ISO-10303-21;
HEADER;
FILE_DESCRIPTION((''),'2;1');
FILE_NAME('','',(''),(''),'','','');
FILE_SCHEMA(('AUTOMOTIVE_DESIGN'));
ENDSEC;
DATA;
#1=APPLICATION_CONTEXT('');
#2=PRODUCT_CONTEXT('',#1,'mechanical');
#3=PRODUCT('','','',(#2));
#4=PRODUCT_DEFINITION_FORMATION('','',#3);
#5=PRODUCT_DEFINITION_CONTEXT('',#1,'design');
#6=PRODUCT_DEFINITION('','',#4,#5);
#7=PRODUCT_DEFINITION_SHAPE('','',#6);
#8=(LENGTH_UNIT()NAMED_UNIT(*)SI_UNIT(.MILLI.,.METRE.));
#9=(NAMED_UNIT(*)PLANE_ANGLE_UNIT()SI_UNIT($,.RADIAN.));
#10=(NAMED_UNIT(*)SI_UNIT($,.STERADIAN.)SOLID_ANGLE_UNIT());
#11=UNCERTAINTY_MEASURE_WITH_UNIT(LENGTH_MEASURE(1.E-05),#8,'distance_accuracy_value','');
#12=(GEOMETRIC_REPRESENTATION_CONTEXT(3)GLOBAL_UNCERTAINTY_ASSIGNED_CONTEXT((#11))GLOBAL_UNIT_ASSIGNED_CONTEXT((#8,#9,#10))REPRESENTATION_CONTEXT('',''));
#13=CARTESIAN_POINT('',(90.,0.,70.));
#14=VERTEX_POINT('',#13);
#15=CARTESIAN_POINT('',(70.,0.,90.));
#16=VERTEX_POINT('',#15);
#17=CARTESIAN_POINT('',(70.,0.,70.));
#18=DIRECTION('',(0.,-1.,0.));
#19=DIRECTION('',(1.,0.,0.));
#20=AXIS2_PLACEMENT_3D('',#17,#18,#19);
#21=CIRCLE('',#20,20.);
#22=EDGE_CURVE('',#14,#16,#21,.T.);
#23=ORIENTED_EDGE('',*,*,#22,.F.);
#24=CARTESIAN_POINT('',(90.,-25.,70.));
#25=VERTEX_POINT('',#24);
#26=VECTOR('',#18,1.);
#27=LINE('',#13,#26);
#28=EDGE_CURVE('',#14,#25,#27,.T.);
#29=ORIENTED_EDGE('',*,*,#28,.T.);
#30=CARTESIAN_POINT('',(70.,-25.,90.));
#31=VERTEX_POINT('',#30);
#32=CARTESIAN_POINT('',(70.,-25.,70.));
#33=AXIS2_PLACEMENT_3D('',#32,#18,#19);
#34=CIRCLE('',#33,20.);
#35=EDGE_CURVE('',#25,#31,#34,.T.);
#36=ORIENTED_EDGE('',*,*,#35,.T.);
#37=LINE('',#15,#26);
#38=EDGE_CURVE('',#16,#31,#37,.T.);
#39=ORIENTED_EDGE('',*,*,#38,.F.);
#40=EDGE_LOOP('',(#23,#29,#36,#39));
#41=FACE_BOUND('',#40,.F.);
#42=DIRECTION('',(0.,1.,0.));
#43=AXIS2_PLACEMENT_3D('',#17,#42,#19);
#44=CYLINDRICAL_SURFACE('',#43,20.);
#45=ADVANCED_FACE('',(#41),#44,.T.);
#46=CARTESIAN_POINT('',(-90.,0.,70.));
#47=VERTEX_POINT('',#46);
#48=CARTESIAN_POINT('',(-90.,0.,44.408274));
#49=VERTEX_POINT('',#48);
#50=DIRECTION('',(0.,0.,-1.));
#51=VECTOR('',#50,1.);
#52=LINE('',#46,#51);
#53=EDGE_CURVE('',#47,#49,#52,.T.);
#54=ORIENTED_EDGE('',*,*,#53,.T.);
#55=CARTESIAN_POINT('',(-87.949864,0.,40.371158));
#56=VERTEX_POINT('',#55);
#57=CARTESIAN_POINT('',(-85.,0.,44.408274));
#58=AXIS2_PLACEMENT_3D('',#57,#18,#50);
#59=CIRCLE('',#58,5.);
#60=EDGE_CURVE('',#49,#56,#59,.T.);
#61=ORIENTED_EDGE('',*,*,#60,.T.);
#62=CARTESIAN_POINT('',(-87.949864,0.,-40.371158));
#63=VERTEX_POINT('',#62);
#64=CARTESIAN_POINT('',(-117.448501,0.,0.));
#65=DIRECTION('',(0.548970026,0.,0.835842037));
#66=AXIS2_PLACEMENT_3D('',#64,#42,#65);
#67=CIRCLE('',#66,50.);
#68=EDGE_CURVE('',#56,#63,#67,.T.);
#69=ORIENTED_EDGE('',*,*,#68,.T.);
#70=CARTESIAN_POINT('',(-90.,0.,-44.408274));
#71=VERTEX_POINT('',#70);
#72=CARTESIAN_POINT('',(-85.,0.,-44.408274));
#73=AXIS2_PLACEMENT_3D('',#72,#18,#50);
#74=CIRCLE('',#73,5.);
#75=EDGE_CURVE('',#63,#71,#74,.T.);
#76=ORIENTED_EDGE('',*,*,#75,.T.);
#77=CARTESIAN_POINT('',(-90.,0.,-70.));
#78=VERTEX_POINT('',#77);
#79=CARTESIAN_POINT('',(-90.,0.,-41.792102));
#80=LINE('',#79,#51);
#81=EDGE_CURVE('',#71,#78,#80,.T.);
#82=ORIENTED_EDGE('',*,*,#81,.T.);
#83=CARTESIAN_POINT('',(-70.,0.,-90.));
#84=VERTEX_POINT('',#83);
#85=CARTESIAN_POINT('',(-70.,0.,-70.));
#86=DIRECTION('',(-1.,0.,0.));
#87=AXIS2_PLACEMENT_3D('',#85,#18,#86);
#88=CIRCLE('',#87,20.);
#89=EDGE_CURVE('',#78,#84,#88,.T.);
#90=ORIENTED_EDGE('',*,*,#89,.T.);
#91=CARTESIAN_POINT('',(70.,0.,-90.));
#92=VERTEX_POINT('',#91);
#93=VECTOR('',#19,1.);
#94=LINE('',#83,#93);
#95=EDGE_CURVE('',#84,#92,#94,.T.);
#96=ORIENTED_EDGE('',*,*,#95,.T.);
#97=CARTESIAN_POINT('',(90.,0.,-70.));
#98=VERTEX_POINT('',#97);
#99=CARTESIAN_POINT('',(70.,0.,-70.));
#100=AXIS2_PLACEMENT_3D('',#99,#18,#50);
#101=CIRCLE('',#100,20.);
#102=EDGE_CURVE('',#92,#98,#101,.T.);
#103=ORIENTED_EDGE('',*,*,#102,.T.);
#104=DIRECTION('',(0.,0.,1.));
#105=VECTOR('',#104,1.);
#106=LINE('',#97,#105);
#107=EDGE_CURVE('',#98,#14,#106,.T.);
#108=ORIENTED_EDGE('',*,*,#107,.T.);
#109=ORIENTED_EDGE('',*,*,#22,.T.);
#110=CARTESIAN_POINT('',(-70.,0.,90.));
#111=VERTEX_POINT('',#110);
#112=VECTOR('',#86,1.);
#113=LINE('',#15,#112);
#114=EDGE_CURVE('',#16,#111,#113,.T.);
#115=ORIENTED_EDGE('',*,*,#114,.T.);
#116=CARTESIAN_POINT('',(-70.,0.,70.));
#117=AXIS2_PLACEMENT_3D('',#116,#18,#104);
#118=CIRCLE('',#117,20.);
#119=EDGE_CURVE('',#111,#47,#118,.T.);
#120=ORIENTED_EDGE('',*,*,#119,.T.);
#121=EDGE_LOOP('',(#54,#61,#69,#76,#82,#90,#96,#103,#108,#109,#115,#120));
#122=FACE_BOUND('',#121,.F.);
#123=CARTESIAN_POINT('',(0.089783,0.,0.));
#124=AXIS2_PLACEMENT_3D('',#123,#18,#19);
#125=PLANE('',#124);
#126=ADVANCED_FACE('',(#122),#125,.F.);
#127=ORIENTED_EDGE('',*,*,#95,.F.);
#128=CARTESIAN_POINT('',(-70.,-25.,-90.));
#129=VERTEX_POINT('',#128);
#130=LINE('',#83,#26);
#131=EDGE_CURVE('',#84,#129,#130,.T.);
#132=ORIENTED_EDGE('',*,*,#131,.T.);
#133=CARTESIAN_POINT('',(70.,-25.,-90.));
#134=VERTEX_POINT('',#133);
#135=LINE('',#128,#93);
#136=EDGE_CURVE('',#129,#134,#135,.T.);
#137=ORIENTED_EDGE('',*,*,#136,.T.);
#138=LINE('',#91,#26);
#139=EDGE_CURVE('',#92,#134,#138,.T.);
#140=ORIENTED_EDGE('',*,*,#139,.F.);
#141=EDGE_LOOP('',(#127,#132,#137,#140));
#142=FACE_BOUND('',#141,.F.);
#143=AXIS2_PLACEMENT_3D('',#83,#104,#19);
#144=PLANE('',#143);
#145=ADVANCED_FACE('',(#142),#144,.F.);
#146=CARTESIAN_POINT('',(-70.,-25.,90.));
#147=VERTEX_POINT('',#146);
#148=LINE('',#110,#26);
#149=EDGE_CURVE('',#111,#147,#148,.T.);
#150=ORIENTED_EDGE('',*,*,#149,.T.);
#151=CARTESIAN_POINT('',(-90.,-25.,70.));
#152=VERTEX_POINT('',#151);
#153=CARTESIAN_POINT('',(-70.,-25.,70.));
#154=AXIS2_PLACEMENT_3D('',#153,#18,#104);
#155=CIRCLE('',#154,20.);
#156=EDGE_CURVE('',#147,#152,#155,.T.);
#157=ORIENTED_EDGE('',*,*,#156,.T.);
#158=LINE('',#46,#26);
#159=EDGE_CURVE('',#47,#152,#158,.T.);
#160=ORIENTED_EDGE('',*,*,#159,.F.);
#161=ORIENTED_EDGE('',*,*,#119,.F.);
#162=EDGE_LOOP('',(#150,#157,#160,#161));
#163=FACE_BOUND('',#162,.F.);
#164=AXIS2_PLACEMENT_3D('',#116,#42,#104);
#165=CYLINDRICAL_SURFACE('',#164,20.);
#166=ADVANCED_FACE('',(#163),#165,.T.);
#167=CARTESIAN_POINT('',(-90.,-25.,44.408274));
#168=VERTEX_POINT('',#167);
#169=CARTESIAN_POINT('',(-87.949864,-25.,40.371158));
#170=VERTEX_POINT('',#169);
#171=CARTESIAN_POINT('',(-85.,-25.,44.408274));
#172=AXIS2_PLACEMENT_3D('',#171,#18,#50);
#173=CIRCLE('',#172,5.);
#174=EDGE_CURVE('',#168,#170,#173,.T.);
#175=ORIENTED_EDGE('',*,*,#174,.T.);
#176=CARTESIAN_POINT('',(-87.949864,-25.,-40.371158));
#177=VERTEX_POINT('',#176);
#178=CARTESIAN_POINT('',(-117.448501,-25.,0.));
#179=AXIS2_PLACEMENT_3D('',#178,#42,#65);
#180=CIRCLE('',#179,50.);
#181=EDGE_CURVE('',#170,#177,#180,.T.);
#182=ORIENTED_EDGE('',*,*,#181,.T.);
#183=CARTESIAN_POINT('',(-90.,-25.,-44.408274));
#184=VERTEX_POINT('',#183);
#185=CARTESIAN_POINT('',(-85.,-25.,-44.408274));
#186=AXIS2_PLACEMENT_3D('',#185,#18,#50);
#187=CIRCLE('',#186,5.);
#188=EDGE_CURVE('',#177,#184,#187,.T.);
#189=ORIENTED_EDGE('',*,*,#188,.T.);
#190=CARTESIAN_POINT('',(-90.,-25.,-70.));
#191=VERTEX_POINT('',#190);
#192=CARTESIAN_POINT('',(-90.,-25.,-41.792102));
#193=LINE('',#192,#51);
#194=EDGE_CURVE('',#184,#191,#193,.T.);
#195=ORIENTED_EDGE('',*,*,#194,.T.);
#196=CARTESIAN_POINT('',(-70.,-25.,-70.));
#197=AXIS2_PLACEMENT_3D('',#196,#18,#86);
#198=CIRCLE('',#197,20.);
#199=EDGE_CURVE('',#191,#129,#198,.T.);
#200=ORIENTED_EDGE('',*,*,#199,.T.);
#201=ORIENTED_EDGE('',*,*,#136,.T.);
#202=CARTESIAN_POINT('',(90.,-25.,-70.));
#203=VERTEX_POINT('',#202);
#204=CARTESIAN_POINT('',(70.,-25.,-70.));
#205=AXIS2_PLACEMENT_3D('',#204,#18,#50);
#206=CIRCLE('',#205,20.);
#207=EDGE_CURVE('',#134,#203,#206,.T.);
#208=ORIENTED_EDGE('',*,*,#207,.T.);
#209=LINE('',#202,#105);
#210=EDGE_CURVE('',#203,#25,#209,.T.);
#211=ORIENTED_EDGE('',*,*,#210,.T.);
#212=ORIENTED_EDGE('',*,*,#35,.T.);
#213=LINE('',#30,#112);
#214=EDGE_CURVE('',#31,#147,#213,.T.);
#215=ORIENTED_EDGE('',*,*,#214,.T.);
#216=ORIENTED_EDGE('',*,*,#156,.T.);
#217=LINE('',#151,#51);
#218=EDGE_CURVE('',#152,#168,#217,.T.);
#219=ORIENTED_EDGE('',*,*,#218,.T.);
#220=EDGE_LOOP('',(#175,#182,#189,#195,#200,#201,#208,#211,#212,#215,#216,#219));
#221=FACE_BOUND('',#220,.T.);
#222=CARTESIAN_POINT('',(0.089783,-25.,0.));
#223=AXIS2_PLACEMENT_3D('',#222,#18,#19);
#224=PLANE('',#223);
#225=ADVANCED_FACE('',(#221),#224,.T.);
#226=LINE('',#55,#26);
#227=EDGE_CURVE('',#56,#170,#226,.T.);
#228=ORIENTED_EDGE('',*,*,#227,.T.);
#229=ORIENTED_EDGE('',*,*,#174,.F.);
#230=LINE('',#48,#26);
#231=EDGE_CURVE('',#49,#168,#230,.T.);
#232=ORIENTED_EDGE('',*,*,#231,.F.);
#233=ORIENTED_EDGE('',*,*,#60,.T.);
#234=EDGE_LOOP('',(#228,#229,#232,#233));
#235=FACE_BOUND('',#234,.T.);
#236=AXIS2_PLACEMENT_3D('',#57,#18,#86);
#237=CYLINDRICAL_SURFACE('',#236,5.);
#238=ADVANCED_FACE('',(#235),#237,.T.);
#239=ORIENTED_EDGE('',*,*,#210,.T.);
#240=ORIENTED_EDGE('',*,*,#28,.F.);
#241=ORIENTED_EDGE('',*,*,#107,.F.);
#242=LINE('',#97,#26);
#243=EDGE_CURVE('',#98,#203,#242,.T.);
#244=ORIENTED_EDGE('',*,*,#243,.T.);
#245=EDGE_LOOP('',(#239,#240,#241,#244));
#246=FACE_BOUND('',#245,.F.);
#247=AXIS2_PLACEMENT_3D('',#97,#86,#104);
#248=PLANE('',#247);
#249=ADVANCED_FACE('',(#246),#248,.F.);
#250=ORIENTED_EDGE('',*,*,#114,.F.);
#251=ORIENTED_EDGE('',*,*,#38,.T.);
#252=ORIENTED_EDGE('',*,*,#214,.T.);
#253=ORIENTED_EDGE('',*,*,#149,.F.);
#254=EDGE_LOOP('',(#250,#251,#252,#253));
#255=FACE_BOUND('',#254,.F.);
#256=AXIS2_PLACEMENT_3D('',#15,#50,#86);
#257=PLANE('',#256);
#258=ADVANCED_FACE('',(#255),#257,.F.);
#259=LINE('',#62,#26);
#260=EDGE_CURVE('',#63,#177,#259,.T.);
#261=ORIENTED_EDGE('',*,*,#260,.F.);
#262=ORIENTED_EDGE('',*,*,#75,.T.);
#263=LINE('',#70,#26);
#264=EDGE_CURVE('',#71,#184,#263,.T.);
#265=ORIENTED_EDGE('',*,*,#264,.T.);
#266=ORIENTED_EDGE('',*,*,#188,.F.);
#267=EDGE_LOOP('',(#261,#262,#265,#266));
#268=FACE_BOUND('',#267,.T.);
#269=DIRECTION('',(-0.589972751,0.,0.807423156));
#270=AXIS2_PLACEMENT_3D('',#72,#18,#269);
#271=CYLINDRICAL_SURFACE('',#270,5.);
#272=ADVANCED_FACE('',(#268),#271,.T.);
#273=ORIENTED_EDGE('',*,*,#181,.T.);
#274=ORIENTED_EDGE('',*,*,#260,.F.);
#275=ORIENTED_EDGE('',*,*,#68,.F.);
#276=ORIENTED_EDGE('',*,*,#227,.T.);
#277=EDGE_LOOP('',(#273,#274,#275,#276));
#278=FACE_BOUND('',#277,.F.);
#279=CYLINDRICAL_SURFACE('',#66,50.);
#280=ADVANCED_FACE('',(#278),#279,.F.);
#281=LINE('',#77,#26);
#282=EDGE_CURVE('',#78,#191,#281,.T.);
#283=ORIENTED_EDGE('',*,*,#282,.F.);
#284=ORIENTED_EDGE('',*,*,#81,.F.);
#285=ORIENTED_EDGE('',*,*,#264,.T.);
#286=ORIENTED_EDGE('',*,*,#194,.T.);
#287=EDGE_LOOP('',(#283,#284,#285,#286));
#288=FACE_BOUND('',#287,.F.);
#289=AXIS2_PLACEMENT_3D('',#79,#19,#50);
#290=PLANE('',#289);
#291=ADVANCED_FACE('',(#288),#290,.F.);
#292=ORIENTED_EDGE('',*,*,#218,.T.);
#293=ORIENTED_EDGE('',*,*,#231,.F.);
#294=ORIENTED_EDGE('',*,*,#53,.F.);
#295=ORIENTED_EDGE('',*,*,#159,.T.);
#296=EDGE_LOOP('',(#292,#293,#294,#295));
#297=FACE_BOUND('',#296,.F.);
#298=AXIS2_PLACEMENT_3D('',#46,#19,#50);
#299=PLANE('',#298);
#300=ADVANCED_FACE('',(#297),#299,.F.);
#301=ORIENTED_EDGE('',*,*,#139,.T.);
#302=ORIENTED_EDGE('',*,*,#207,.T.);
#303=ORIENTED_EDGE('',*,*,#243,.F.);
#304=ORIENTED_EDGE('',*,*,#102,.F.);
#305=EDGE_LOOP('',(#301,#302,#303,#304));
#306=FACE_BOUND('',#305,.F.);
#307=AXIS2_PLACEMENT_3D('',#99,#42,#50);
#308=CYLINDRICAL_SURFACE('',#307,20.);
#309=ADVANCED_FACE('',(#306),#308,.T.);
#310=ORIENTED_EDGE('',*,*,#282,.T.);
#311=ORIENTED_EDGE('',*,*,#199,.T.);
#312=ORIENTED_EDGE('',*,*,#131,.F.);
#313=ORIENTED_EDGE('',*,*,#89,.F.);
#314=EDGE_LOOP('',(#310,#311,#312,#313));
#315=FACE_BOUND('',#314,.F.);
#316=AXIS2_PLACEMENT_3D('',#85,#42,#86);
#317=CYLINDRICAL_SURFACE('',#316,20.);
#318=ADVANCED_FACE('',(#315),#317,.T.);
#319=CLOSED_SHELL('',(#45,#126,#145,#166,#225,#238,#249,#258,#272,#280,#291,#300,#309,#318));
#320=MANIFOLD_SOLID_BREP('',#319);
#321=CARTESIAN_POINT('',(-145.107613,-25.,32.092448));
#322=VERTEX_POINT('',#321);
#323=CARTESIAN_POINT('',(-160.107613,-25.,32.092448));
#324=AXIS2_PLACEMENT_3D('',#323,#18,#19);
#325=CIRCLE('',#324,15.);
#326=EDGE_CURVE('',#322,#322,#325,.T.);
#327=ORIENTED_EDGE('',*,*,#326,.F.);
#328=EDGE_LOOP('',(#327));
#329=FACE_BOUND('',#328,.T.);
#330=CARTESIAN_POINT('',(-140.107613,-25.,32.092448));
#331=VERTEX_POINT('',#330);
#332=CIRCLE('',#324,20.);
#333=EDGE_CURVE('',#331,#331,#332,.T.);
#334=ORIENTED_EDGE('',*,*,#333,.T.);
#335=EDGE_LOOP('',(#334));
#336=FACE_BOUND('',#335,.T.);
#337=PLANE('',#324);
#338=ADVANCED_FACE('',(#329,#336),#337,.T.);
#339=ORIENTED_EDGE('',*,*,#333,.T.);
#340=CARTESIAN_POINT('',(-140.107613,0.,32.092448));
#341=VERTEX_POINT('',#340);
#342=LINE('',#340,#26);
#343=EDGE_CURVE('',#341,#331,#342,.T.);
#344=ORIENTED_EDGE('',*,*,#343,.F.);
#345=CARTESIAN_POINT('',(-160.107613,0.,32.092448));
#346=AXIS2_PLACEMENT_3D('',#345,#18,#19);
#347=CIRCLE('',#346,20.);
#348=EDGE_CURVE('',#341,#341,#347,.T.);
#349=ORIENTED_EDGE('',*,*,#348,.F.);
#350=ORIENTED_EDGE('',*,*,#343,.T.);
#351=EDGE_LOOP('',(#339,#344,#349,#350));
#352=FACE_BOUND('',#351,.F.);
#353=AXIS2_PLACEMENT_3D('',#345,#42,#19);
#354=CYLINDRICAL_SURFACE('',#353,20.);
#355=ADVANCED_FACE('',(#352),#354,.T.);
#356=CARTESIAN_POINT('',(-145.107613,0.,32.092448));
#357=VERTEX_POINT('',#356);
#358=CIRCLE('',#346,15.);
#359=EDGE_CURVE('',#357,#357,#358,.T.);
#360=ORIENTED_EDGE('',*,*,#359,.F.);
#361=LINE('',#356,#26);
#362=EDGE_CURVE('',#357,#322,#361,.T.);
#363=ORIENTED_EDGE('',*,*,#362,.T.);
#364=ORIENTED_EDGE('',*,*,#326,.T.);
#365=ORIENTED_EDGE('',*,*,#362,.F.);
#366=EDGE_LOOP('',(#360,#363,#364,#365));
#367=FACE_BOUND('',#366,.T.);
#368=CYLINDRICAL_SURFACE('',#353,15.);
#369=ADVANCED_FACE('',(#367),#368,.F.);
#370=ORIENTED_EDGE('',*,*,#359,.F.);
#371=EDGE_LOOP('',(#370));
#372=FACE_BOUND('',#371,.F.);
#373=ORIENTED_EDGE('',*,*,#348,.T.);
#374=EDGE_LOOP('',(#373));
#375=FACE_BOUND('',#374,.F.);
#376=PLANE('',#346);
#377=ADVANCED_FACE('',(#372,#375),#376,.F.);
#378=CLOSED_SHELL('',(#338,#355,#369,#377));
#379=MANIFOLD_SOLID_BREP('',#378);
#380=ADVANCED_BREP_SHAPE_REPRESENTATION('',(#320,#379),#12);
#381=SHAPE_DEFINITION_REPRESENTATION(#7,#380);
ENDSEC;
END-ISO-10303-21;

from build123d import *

# Parameters (mm, degrees)
F1_DEPTH = 25
F2_R     = 20
F2_R_2   = 15
F3_DEPTH = 25
F4_R     = 5


with BuildPart() as f1:
    # F0 (on Front) → F1 (new body)
    with BuildSketch(Plane.XZ):
        with BuildLine():
            Line((70, 90), (-70, 90))
            ThreePointArc((-70, 90), (-84.1421356237, 84.1421356237), (-90, 70))
            Line((-90, 70), (-90, 41.7921018494))
            ThreePointArc((-90, 41.7921018494), (-67.4485012889, 0), (-90, -41.7921018494))
            Line((-90, -41.7921018494), (-90, -70))
            ThreePointArc((-90, -70), (-84.1421356237, -84.1421356237), (-70, -90))
            Line((-70, -90), (70, -90))
            ThreePointArc((70, -90), (84.1421356237, -84.1421356237), (90, -70))
            Line((90, -70), (90, 70))
            ThreePointArc((90, 70), (84.1421356237, 84.1421356237), (70, 90))
        make_face()
    extrude(amount=F1_DEPTH)

    # F4
    f4_edges = [f1.edges().sort_by_distance(p)[0] for p in [
        (-90, -12.5, -41.792102),
        (-90, -12.5, 41.792102),
    ]]
    fillet(f4_edges, radius=F4_R)


with BuildPart() as f3:
    # F2 (on Front) → F3 (new body)
    with BuildSketch(Plane.XZ):
        with Locations((-160.1076126099, 32.092448324)):
            Circle(F2_R)
        with Locations((-160.1076126099, 32.092448324)):
            Circle(F2_R_2, mode=Mode.SUBTRACT)
    extrude(amount=F3_DEPTH)


solid = Compound([f1.part, f3.part])
